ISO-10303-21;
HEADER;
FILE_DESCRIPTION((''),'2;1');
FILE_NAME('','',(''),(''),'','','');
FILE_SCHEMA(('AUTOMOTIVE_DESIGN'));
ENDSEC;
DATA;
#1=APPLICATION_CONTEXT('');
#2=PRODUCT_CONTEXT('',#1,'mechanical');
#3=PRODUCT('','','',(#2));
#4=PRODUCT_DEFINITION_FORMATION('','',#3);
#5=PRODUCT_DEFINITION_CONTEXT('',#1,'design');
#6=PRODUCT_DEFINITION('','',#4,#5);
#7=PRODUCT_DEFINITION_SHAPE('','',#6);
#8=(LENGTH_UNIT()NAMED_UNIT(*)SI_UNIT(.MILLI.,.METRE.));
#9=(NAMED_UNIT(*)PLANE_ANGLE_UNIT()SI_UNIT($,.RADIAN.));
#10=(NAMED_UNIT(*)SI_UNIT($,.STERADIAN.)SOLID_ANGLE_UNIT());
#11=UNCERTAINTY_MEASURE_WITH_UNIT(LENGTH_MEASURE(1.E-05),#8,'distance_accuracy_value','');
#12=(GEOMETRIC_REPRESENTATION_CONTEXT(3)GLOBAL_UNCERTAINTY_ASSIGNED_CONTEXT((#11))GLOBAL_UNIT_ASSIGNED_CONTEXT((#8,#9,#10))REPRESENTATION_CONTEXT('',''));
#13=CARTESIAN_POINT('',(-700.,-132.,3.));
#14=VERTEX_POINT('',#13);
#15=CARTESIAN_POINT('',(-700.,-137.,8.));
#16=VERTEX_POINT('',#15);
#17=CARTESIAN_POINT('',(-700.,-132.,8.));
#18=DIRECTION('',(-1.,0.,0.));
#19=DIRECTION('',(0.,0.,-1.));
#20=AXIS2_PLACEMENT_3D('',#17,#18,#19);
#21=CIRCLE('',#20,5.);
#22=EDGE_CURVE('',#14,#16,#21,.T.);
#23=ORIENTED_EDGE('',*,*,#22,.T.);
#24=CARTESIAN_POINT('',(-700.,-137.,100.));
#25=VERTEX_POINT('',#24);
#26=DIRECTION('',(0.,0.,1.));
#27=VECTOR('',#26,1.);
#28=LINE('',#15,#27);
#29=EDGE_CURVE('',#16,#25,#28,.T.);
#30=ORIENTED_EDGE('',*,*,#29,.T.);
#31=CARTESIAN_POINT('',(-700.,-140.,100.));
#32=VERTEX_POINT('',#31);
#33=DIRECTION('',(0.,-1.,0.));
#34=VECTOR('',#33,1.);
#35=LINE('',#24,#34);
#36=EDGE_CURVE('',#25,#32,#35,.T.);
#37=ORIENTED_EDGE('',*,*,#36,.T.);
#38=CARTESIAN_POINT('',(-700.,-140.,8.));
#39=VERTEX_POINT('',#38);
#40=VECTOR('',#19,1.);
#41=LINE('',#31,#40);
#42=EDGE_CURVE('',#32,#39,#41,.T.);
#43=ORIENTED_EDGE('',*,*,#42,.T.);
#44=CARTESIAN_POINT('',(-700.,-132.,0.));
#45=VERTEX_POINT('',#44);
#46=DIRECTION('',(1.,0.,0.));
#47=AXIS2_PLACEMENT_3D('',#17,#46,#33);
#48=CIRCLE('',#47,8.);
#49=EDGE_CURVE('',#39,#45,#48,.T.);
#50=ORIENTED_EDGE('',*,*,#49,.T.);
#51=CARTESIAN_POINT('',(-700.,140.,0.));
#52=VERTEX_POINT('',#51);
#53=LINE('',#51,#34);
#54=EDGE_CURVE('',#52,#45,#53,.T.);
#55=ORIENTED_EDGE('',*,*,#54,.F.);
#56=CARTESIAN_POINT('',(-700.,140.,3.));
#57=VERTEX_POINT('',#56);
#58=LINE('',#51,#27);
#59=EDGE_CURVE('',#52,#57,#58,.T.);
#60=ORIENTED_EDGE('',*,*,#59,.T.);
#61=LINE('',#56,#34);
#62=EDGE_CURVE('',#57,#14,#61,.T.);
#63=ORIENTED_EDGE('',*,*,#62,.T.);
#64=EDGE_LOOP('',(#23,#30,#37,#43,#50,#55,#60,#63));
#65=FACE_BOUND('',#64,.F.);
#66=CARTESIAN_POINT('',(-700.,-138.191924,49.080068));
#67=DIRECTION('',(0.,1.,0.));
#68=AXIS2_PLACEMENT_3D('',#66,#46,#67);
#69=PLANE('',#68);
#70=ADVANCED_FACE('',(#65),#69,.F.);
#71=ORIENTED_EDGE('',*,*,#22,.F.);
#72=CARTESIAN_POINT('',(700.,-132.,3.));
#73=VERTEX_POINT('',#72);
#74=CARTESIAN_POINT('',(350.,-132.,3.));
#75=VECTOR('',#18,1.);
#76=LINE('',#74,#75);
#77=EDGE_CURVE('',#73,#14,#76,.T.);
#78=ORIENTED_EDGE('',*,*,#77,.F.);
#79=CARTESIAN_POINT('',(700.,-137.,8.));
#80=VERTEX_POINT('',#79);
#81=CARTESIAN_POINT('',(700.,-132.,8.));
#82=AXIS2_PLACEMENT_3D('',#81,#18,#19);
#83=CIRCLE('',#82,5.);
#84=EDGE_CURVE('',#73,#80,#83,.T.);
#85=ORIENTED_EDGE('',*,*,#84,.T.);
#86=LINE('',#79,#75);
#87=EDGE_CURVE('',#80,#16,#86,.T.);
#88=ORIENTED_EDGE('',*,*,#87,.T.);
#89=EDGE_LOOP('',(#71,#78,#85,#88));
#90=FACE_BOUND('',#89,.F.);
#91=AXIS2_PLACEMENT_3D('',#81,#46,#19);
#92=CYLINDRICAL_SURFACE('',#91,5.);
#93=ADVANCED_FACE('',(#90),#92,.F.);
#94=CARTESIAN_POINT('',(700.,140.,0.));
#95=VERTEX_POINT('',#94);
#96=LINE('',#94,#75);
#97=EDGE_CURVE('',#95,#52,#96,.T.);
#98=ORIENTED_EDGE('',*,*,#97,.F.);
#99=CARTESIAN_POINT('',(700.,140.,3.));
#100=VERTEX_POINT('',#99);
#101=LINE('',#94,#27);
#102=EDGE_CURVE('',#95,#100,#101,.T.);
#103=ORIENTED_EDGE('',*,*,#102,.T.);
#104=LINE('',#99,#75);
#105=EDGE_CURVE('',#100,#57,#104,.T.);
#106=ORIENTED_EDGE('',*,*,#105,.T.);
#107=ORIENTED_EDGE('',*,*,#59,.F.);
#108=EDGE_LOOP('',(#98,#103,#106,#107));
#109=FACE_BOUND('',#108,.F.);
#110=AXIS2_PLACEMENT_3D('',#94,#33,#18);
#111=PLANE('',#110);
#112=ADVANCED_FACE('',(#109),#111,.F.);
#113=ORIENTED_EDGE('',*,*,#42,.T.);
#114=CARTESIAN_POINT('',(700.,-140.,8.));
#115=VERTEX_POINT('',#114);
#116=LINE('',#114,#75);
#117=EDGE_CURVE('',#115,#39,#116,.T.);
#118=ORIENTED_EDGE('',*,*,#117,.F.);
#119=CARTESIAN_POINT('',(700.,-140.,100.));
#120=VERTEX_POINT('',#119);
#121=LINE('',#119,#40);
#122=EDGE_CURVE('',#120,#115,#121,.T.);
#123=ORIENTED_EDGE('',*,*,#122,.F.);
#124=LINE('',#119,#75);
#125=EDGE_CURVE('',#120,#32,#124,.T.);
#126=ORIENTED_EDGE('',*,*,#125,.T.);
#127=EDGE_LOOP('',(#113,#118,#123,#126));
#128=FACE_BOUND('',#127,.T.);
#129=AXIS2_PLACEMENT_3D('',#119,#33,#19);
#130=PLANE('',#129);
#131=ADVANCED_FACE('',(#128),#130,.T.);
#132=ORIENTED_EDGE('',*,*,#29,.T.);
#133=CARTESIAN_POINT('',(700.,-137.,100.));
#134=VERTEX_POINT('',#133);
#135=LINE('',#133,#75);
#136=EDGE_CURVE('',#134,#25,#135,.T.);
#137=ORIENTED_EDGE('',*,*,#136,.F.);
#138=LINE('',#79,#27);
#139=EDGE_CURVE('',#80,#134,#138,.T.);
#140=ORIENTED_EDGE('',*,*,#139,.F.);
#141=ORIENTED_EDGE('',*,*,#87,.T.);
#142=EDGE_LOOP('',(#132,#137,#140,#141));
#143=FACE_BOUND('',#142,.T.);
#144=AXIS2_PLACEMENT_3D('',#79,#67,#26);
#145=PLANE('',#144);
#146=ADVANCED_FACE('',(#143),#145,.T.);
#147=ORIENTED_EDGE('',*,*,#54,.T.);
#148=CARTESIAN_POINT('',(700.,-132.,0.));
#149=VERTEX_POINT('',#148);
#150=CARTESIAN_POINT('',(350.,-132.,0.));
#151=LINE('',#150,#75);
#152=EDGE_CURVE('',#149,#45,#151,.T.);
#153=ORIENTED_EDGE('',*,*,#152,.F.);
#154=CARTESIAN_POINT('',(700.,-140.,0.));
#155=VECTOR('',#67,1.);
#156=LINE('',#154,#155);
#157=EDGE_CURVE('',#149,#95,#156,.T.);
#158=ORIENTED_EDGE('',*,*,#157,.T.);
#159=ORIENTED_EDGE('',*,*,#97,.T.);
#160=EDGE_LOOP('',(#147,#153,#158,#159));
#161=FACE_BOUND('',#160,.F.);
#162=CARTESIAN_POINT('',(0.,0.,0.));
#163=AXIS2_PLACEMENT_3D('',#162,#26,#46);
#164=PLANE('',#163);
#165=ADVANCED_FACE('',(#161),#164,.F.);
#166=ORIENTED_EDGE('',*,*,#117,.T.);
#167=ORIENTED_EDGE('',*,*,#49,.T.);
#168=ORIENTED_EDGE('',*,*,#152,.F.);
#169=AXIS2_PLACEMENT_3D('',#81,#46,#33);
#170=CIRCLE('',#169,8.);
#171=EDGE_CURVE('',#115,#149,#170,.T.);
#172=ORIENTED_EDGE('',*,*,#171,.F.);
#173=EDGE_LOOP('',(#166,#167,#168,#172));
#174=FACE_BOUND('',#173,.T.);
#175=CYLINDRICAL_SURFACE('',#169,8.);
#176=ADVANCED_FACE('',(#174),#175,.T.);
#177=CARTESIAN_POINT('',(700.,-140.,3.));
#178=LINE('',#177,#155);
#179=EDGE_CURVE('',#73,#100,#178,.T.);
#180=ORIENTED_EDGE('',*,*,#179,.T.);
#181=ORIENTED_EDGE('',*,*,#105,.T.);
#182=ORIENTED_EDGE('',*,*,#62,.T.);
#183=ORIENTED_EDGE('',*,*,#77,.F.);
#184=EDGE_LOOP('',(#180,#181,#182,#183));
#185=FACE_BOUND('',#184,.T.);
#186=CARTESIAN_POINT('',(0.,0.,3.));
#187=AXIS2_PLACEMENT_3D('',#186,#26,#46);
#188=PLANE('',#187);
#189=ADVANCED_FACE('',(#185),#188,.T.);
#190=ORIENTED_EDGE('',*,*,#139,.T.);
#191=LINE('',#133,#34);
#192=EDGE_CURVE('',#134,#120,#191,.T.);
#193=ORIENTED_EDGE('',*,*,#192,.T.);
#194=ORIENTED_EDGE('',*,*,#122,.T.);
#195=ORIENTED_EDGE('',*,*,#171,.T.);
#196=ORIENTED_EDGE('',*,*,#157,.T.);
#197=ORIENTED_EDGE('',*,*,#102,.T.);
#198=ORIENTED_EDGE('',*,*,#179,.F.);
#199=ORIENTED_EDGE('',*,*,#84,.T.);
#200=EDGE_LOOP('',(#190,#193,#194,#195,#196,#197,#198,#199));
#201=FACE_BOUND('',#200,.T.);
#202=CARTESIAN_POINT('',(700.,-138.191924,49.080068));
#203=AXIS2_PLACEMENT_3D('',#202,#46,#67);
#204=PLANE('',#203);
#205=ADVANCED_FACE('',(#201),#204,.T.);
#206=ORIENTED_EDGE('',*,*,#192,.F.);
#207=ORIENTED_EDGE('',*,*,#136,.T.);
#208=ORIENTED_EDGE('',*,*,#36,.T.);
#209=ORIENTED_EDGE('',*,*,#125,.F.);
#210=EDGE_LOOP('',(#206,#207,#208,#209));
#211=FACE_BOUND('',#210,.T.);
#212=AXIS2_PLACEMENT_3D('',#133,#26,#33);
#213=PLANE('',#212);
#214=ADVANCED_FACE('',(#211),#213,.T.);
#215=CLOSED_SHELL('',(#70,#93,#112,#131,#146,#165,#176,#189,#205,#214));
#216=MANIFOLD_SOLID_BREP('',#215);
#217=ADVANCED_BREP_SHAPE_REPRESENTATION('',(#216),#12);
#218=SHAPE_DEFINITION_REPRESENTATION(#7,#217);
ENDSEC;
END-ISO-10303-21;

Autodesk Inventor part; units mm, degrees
ref_plane "YZ Plane" through (0, 0, 0) normal (1, 0, 0) x (0, 1, 0)
ref_plane "XZ Plane" through (0, 0, 0) normal (0, 1, 0) x (-1, 0, 0)
ref_plane "XY Plane" through (0, 0, 0) normal (0, 0, 1) x (1, 0, 0)
sketch "Sketch1" plane through (0, 0, 0) normal (0, 0, 1) x (1, 0, 0)
  line L0 (700, 140) -> (-700, 140)
  line L1 (-700, 140) -> (-700, -140)
  line L2 (-700, -140) -> (700, -140)
  line L3 (700, -140) -> (700, 140)
  line L4 (700, 140) -> (-700, -140) construction
  line L5 (-700, 140) -> (700, -140) construction
  point P0 (0, 0)
  point P1 (0, 0)
  point P2 (700, 0)
  dimension "d32" = 280
  dimension "d33" = 1400
extrude "Plate1" add sketch "Sketch1" along normal blind 3
sketch "Sketch6" plane through (700, -137, 0) normal (0, -1, 0) x (1, 0, 0)
  line L0 (-1400, 0) -> (0, 0)
  line L1 (0, 0) -> (0, 100)
  line L2 (0, 100) -> (-1400, 100)
  line L3 (-1400, 100) -> (-1400, 0)
edge flange "Flange2" height 100 angle 90 thickness 3 bend radius 5 thickness toward (0, -1, 0) relief round relief width 3 relief depth 1.5 edges at (0, -140, 3) wall of the first edge with corners at (-700, -137, 0) (700, -137, 0) (700, -137, 100) (-700, -137, 100)
bend "Bend2"
corner "Corner2"
sketch "Sketch8" plane through (0, 0, 3) normal (0, 0, 1) x (1, 0, 0)
  line L0 (646.1751, 51.4978) -> (596.1751, 51.4978)
  line L1 (596.1751, 51.4978) -> (596.1751, 101.4978)
  line L2 (596.1751, 101.4978) -> (646.1751, 101.4978)
  line L3 (646.1751, 101.4978) -> (646.1751, 51.4978)
  line L4 (646.1751, 51.4978) -> (596.1751, 101.4978) construction
  line L5 (596.1751, 51.4978) -> (646.1751, 101.4978) construction
  circle A0 centre (652.9949, 44.678) radius 3.5
  circle A1 centre (589.3553, 44.678) radius 3.5
  circle A2 centre (589.3553, 108.3176) radius 3.5
  circle A3 centre (652.9949, 108.3176) radius 3.5
  circle A4 centre (621.1751, 76.4978) radius 45 construction
  point P0 (0, 0)
  dimension "d51" = 50
  dimension "d52" = 50
  dimension "d53" = 7
  dimension "d54" = 90
cut "Cut3" [suppressed]
pattern_linear "Rectangular Pattern1" [suppressed]
equation "\"d55\" = Thickness"
equation "\"d2\" = Thickness"
equation "\"d36\" = BendReliefWidth"
equation "\"d37\" = BendReliefDepth"
equation "\"d38\" = MinimumRemnant"
equation "\"d39\" = TransitionRadius"
equation "\"d42\" = BendRadius"
equation "\"d43\" = CornerReliefSize"
equation "\"d44\" = GapSize"
equation "\"d45\" = JacobiRadiusSize"
equation "\"BendReliefWidth\" = Thickness"
equation "\"BendReliefDepth\" = 0.5 * Thickness"
equation "\"CornerReliefSize\" = 4 * Thickness"
equation "\"MinimumRemnant\" = 2 * Thickness"
equation "\"TransitionRadius\" = BendRadius"
equation "\"JacobiRadiusSize\" = BendRadius"
equation "\"GapSize\" = Thickness"
equation "\"Thickness\" = 3"
equation "\"BendRadius\" = 5"
properties part number "TKS 3006 BOTTOM DS diameter way blind" material "Stainless Steel"
